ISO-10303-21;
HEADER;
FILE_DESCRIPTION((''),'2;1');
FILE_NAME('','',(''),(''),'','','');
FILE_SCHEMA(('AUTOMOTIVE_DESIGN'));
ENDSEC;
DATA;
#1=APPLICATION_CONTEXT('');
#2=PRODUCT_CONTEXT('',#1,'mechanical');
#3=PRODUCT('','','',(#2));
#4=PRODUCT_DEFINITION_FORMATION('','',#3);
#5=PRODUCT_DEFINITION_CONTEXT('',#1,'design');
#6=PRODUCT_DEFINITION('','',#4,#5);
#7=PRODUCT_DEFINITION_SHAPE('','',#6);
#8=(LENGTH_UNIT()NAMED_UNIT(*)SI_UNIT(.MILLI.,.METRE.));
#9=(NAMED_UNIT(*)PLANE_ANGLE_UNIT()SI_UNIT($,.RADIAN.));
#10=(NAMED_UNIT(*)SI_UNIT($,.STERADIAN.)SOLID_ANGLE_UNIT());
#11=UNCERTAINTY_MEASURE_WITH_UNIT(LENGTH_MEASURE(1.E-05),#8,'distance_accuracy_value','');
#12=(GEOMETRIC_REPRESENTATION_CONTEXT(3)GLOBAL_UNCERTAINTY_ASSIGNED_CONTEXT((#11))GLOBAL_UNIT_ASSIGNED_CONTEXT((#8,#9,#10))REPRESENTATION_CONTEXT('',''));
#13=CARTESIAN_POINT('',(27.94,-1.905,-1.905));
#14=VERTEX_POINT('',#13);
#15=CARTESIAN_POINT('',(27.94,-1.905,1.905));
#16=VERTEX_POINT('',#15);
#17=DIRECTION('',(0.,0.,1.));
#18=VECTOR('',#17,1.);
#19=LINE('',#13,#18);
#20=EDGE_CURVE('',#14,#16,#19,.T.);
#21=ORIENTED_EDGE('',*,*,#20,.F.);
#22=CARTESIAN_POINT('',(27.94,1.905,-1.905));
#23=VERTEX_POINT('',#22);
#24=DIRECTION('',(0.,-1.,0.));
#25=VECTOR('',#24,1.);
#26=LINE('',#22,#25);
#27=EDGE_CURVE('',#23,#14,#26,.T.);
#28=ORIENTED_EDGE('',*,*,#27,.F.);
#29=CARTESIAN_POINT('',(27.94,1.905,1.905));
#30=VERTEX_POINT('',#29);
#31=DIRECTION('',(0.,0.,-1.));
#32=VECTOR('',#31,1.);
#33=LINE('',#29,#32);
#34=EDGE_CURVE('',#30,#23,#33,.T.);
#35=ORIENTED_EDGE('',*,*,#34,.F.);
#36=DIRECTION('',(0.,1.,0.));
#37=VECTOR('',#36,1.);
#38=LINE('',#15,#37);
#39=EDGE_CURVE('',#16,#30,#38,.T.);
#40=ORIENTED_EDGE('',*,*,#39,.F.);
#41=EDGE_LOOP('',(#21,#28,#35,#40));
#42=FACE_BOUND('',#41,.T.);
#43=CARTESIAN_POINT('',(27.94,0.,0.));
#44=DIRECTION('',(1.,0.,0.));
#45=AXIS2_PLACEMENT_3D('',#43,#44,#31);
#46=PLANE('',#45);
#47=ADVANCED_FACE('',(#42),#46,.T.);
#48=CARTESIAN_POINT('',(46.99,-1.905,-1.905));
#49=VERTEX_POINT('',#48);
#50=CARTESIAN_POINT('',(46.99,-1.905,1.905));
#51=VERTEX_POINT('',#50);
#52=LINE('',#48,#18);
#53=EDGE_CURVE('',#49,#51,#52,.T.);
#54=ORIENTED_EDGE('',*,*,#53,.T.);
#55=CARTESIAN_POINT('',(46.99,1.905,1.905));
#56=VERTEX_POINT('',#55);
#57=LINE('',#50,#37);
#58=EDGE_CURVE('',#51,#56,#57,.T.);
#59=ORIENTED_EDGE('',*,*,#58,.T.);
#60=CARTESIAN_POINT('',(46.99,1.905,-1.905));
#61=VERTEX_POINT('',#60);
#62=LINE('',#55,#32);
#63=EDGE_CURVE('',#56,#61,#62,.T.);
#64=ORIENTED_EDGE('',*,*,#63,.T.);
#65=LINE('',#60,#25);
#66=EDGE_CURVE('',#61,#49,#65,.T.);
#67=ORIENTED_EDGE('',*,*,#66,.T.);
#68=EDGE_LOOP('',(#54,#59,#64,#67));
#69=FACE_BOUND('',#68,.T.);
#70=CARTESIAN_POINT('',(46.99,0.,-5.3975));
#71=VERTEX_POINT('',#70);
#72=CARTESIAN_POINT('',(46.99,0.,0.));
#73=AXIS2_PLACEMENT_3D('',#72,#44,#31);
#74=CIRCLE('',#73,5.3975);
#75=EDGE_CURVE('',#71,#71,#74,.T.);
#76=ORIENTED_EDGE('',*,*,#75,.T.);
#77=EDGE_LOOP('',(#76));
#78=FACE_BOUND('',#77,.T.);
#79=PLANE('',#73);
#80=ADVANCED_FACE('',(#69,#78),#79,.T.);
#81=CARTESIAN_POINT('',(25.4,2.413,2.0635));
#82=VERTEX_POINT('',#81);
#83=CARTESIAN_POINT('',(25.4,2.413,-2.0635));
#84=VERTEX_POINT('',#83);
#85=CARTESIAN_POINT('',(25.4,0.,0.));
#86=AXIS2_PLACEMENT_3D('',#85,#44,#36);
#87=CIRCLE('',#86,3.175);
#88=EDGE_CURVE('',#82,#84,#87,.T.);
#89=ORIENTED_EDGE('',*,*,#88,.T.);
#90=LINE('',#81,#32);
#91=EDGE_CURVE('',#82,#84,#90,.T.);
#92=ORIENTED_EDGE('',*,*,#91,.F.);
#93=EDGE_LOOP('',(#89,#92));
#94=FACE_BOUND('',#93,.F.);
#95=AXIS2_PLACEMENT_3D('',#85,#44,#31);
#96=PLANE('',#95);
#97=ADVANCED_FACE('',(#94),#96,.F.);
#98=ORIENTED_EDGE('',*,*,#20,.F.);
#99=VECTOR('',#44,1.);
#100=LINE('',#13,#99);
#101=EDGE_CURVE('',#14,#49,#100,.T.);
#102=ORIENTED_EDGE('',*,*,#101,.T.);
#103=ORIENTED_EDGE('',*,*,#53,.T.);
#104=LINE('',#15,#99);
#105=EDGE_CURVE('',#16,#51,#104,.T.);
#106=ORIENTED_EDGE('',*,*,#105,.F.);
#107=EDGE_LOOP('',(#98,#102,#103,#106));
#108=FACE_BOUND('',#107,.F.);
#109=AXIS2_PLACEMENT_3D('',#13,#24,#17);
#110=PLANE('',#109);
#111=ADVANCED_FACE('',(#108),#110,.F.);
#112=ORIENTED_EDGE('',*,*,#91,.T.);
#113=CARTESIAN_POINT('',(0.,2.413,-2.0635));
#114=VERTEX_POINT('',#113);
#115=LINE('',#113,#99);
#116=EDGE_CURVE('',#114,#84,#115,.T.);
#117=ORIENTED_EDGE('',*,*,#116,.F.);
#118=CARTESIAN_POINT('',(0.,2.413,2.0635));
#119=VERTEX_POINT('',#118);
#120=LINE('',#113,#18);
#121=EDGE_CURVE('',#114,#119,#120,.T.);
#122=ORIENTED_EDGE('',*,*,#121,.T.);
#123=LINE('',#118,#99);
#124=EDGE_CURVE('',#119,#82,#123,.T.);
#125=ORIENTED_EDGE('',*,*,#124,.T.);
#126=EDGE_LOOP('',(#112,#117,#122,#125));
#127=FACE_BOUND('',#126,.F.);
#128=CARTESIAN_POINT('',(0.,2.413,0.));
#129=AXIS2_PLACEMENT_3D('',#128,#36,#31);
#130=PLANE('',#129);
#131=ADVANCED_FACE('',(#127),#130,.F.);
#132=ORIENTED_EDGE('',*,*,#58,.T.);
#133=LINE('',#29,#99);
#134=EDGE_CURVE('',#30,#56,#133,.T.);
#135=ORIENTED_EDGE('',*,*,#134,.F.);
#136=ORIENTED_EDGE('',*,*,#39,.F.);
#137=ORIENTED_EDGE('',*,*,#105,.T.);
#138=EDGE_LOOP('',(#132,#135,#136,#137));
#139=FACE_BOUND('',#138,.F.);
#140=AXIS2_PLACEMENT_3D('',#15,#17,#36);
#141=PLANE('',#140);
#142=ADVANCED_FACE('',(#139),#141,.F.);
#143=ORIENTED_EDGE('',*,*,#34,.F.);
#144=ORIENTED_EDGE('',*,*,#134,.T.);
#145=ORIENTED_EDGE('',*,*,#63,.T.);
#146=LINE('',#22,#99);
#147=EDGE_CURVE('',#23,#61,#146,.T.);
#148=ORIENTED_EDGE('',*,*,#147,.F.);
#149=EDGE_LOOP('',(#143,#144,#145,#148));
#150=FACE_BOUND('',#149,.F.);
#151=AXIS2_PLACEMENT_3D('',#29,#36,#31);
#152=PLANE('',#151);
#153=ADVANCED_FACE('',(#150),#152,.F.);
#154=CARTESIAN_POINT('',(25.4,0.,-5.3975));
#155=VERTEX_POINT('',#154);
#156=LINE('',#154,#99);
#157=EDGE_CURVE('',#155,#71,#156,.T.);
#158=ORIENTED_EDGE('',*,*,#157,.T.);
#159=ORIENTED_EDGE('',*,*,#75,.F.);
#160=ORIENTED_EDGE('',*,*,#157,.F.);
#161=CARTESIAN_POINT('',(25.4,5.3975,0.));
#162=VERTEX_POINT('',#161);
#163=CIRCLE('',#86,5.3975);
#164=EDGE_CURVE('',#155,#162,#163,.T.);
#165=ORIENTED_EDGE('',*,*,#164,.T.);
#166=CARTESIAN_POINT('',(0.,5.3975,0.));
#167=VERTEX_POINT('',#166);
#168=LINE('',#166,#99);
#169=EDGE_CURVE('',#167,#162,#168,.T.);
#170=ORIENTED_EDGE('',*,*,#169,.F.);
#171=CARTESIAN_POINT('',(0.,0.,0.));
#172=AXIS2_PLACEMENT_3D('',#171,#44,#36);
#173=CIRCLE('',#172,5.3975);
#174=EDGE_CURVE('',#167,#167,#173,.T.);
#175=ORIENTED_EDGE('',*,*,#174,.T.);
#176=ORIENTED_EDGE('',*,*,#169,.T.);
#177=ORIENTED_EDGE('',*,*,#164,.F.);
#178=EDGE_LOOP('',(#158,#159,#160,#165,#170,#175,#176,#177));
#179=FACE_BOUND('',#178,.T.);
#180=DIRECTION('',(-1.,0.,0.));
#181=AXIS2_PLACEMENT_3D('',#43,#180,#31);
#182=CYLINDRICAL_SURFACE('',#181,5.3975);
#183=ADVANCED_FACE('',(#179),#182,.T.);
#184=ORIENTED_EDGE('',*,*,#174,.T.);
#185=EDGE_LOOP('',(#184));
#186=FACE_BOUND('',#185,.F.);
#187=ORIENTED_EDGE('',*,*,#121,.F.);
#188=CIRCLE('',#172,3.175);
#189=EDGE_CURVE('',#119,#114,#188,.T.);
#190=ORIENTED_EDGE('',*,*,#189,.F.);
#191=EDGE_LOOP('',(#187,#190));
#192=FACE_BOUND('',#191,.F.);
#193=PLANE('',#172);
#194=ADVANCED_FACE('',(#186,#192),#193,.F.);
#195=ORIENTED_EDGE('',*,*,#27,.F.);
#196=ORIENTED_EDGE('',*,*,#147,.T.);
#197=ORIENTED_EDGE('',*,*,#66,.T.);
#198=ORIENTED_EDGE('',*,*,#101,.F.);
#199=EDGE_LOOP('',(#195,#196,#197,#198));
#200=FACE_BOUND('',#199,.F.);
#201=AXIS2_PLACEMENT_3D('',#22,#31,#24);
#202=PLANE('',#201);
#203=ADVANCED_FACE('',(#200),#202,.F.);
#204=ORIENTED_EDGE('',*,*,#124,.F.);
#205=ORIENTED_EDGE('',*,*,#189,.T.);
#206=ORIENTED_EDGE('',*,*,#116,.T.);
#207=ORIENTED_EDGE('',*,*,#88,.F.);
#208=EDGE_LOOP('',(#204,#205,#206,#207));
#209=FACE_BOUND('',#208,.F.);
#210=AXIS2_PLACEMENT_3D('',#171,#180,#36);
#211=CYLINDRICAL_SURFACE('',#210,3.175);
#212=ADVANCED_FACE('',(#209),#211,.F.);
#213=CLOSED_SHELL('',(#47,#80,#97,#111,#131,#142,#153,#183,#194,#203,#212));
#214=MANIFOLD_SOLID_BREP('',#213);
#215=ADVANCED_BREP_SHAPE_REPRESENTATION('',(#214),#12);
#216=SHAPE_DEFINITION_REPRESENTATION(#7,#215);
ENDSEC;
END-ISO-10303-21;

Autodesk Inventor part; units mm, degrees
ref_plane "YZ Plane" through (0, 0, 0) normal (1, 0, 0) x (0, 1, 0)
ref_plane "XZ Plane" through (0, 0, 0) normal (0, 1, 0) x (-1, 0, 0)
ref_plane "XY Plane" through (0, 0, 0) normal (0, 0, 1) x (1, 0, 0)
sketch "Sketch1" plane through (0, 0, 0) normal (1, 0, 0) x (0, 1, 0)
  circle A0 centre (0, 0) radius 5.3975
  circle A1 centre (0, 0) radius 3.175
  line L0 (-3.175, 0) -> (2.413, 0) construction
  line L1 (2.413, 0) -> (2.413, -2.0635)
  line L2 (2.413, 0) -> (2.413, 2.0635)
  dimension "d0" = 10.795
  dimension "d1" = 6.35
  dimension "d2" = 5.588
extrude "Extrusion1" add sketch "Sketch1" along normal blind 25.4 contours A0 | A1 L1 L2 picked at (2.5514, -1.1687)
sketch "Sketch2" plane through (25.4, 0, 0) normal (1, 0, 0) x (0, 0, -1)
  circle A0 centre (0, 0) radius 5.3975
  dimension "d11" = 10.795
extrude "Extrusion2" add sketch "Sketch2" along normal blind 2.54
sketch "Sketch3" plane through (27.94, 0, 0) normal (1, 0, 0) x (0, 0, -1)
  arc A0 (-2.0635, 2.413) -> (2.0635, 2.413) centre (0, 0) ccw projected
  circle A1 centre (0, 0) radius 5.3975
  line L0 (1.905, -1.905) -> (-1.905, -1.905)
  line L1 (-1.905, -1.905) -> (-1.905, 1.905)
  line L2 (-1.905, 1.905) -> (1.905, 1.905)
  line L3 (1.905, 1.905) -> (1.905, -1.905)
  line L4 (1.905, -1.905) -> (-1.905, 1.905) construction
  line L5 (-1.905, -1.905) -> (1.905, 1.905) construction
  dimension "d7" = 3.81
  dimension "d8" = 3.81
  dimension "d12" = 10.795
extrude "Extrusion3" add sketch "Sketch3" along normal blind 19.05
properties part number "NeveRestVex"
